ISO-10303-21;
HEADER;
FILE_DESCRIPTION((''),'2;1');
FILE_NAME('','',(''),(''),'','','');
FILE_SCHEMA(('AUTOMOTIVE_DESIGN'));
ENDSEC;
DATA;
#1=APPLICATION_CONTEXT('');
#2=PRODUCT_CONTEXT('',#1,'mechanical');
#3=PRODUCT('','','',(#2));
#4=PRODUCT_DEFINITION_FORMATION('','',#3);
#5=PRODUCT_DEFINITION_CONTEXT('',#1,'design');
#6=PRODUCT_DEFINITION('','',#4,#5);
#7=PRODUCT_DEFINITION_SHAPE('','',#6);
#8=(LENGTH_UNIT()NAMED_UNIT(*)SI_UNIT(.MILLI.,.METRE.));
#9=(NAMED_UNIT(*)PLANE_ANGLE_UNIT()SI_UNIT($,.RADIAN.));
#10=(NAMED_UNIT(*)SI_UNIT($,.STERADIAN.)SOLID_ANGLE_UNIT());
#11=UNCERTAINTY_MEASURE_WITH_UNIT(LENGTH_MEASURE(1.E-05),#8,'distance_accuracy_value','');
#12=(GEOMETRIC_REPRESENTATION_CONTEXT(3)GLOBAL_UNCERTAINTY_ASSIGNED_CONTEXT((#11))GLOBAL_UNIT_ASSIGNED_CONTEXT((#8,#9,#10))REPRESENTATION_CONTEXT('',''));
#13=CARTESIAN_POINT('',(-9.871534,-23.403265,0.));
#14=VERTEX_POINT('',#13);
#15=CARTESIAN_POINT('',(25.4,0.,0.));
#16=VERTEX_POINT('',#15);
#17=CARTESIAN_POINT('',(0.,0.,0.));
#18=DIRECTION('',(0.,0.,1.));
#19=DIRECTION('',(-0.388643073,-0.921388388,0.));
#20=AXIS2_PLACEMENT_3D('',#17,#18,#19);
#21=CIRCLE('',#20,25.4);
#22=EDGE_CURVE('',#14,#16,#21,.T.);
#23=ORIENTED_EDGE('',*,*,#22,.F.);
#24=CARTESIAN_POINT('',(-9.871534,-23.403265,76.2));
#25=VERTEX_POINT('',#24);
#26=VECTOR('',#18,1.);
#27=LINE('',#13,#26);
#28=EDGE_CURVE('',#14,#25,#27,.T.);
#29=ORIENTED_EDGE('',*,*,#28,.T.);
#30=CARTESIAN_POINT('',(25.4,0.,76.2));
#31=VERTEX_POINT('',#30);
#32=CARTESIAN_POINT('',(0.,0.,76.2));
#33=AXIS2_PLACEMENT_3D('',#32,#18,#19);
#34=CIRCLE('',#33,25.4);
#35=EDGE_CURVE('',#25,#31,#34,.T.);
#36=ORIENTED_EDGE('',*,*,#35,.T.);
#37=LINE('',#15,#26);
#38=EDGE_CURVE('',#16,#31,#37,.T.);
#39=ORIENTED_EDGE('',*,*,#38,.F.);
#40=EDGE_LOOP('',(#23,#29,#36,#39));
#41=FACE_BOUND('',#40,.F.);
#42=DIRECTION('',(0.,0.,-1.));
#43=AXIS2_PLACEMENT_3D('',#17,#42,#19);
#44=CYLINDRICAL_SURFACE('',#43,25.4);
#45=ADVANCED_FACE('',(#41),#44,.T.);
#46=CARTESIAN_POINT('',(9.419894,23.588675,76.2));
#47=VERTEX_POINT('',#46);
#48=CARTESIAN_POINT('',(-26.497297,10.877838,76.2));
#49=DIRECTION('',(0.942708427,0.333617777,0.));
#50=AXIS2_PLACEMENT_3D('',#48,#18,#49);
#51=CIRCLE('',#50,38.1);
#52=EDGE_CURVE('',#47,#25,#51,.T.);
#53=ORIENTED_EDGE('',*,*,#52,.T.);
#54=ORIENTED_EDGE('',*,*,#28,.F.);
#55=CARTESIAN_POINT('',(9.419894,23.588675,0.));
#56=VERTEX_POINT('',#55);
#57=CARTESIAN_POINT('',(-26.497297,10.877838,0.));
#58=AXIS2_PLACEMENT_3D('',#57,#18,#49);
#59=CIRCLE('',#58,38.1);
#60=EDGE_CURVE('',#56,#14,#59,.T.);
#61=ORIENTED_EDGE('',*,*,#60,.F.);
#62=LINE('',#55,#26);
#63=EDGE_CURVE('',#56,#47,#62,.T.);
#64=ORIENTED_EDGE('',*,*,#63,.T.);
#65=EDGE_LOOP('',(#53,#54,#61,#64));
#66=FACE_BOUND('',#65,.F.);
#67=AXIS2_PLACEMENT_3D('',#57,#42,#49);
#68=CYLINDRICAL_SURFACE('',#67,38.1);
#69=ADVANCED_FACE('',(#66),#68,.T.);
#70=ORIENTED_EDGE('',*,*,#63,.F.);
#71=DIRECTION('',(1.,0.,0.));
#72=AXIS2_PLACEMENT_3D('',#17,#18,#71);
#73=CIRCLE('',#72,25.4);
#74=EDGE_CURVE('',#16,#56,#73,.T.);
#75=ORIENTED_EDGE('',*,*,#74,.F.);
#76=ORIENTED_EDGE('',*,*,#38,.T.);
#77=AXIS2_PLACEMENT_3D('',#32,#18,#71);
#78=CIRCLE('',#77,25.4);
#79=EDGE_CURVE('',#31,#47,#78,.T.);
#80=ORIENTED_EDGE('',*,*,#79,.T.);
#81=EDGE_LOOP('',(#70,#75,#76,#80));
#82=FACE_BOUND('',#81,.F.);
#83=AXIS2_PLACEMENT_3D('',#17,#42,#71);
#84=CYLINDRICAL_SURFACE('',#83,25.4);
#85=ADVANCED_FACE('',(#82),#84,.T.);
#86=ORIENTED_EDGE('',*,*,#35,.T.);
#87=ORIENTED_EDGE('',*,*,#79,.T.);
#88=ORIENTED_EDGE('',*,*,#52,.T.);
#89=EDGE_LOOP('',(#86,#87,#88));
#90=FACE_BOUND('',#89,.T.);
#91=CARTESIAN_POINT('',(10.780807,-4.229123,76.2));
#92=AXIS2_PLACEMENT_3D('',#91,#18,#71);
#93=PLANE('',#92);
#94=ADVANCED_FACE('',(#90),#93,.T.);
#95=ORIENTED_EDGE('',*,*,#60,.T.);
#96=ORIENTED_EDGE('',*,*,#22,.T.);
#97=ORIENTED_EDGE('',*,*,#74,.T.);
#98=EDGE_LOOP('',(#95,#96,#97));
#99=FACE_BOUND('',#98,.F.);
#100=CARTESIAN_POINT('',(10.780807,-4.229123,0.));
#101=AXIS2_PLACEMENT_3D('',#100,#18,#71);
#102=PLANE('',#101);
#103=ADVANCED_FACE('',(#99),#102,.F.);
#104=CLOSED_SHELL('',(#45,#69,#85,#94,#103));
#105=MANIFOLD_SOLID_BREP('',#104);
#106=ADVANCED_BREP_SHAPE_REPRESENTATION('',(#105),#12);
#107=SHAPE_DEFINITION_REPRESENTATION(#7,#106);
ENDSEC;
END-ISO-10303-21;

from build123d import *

# Parameters (mm, degrees)
F1_DEPTH = 76.2


# Not quite as in the source:
# - the program builds the solid bodies; features that only make, move or delete a surface that nothing else refers to are left out


with BuildPart() as f1:
    # F0 (on Top) → F1 (new body)
    with BuildSketch(Plane.XY):
        with BuildLine():
            ThreePointArc((25.4, 0), (21.0288529546, 14.2459588449), (9.4198942195, 23.5886750983))
            ThreePointArc((9.4198942195, 23.5886750983), (11.0530358989, 17.3262879854), (11.6027031443, 10.8778377828))
            ThreePointArc((11.6027031443, 10.8778377828), (5.7908709636, -9.3479927037), (-9.8715340666, -23.4032650536))
            ThreePointArc((-9.8715340666, -23.4032650536), (14.0432018199, -21.1647934704), (25.4, 0))
        make_face()
        with BuildLine():
            ThreePointArc((-27.7389652249, 48.9575995948), (-26.3638524464, 42.2521457464), (-25.9026905717, 35.4226965598))
            ThreePointArc((-25.9026905717, 35.4226965598), (-34.4786287625, 7.1778987321), (-57.3109033406, -11.530456561))
            ThreePointArc((-57.3109033406, -11.530456561), (-35.747411588, -26.0822133189), (-9.8715340666, -23.4032650536))
            ThreePointArc((-9.8715340666, -23.4032650536), (-23.4970552293, 9.6461596271), (9.4198942195, 23.5886750983))
            ThreePointArc((9.4198942195, 23.5886750983), (-5.0148958898, 42.3439536654), (-27.7389652249, 48.9575995948))
        make_face()
        with BuildLine():
            ThreePointArc((-57.3109033406, -11.530456561), (-34.4786287625, 7.1778987321), (-25.9026905717, 35.4226965598))
            ThreePointArc((-25.9026905717, 35.4226965598), (-26.3638524464, 42.2521457464), (-27.7389652249, 48.9575995948))
            ThreePointArc((-27.7389652249, 48.9575995948), (-60.7257411071, 27.6117436069), (-57.3109033406, -11.530456561))
        make_face()
        with BuildLine():
            ThreePointArc((11.6027031443, 10.8778377828), (11.0530358989, 17.3262879854), (9.4198942195, 23.5886750983))
            ThreePointArc((9.4198942195, 23.5886750983), (-23.4970552293, 9.6461596271), (-9.8715340666, -23.4032650536))
            ThreePointArc((-9.8715340666, -23.4032650536), (5.7908709636, -9.3479927037), (11.6027031443, 10.8778377828))
        make_face()
    extrude(amount=F1_DEPTH)


solid = f1.part
